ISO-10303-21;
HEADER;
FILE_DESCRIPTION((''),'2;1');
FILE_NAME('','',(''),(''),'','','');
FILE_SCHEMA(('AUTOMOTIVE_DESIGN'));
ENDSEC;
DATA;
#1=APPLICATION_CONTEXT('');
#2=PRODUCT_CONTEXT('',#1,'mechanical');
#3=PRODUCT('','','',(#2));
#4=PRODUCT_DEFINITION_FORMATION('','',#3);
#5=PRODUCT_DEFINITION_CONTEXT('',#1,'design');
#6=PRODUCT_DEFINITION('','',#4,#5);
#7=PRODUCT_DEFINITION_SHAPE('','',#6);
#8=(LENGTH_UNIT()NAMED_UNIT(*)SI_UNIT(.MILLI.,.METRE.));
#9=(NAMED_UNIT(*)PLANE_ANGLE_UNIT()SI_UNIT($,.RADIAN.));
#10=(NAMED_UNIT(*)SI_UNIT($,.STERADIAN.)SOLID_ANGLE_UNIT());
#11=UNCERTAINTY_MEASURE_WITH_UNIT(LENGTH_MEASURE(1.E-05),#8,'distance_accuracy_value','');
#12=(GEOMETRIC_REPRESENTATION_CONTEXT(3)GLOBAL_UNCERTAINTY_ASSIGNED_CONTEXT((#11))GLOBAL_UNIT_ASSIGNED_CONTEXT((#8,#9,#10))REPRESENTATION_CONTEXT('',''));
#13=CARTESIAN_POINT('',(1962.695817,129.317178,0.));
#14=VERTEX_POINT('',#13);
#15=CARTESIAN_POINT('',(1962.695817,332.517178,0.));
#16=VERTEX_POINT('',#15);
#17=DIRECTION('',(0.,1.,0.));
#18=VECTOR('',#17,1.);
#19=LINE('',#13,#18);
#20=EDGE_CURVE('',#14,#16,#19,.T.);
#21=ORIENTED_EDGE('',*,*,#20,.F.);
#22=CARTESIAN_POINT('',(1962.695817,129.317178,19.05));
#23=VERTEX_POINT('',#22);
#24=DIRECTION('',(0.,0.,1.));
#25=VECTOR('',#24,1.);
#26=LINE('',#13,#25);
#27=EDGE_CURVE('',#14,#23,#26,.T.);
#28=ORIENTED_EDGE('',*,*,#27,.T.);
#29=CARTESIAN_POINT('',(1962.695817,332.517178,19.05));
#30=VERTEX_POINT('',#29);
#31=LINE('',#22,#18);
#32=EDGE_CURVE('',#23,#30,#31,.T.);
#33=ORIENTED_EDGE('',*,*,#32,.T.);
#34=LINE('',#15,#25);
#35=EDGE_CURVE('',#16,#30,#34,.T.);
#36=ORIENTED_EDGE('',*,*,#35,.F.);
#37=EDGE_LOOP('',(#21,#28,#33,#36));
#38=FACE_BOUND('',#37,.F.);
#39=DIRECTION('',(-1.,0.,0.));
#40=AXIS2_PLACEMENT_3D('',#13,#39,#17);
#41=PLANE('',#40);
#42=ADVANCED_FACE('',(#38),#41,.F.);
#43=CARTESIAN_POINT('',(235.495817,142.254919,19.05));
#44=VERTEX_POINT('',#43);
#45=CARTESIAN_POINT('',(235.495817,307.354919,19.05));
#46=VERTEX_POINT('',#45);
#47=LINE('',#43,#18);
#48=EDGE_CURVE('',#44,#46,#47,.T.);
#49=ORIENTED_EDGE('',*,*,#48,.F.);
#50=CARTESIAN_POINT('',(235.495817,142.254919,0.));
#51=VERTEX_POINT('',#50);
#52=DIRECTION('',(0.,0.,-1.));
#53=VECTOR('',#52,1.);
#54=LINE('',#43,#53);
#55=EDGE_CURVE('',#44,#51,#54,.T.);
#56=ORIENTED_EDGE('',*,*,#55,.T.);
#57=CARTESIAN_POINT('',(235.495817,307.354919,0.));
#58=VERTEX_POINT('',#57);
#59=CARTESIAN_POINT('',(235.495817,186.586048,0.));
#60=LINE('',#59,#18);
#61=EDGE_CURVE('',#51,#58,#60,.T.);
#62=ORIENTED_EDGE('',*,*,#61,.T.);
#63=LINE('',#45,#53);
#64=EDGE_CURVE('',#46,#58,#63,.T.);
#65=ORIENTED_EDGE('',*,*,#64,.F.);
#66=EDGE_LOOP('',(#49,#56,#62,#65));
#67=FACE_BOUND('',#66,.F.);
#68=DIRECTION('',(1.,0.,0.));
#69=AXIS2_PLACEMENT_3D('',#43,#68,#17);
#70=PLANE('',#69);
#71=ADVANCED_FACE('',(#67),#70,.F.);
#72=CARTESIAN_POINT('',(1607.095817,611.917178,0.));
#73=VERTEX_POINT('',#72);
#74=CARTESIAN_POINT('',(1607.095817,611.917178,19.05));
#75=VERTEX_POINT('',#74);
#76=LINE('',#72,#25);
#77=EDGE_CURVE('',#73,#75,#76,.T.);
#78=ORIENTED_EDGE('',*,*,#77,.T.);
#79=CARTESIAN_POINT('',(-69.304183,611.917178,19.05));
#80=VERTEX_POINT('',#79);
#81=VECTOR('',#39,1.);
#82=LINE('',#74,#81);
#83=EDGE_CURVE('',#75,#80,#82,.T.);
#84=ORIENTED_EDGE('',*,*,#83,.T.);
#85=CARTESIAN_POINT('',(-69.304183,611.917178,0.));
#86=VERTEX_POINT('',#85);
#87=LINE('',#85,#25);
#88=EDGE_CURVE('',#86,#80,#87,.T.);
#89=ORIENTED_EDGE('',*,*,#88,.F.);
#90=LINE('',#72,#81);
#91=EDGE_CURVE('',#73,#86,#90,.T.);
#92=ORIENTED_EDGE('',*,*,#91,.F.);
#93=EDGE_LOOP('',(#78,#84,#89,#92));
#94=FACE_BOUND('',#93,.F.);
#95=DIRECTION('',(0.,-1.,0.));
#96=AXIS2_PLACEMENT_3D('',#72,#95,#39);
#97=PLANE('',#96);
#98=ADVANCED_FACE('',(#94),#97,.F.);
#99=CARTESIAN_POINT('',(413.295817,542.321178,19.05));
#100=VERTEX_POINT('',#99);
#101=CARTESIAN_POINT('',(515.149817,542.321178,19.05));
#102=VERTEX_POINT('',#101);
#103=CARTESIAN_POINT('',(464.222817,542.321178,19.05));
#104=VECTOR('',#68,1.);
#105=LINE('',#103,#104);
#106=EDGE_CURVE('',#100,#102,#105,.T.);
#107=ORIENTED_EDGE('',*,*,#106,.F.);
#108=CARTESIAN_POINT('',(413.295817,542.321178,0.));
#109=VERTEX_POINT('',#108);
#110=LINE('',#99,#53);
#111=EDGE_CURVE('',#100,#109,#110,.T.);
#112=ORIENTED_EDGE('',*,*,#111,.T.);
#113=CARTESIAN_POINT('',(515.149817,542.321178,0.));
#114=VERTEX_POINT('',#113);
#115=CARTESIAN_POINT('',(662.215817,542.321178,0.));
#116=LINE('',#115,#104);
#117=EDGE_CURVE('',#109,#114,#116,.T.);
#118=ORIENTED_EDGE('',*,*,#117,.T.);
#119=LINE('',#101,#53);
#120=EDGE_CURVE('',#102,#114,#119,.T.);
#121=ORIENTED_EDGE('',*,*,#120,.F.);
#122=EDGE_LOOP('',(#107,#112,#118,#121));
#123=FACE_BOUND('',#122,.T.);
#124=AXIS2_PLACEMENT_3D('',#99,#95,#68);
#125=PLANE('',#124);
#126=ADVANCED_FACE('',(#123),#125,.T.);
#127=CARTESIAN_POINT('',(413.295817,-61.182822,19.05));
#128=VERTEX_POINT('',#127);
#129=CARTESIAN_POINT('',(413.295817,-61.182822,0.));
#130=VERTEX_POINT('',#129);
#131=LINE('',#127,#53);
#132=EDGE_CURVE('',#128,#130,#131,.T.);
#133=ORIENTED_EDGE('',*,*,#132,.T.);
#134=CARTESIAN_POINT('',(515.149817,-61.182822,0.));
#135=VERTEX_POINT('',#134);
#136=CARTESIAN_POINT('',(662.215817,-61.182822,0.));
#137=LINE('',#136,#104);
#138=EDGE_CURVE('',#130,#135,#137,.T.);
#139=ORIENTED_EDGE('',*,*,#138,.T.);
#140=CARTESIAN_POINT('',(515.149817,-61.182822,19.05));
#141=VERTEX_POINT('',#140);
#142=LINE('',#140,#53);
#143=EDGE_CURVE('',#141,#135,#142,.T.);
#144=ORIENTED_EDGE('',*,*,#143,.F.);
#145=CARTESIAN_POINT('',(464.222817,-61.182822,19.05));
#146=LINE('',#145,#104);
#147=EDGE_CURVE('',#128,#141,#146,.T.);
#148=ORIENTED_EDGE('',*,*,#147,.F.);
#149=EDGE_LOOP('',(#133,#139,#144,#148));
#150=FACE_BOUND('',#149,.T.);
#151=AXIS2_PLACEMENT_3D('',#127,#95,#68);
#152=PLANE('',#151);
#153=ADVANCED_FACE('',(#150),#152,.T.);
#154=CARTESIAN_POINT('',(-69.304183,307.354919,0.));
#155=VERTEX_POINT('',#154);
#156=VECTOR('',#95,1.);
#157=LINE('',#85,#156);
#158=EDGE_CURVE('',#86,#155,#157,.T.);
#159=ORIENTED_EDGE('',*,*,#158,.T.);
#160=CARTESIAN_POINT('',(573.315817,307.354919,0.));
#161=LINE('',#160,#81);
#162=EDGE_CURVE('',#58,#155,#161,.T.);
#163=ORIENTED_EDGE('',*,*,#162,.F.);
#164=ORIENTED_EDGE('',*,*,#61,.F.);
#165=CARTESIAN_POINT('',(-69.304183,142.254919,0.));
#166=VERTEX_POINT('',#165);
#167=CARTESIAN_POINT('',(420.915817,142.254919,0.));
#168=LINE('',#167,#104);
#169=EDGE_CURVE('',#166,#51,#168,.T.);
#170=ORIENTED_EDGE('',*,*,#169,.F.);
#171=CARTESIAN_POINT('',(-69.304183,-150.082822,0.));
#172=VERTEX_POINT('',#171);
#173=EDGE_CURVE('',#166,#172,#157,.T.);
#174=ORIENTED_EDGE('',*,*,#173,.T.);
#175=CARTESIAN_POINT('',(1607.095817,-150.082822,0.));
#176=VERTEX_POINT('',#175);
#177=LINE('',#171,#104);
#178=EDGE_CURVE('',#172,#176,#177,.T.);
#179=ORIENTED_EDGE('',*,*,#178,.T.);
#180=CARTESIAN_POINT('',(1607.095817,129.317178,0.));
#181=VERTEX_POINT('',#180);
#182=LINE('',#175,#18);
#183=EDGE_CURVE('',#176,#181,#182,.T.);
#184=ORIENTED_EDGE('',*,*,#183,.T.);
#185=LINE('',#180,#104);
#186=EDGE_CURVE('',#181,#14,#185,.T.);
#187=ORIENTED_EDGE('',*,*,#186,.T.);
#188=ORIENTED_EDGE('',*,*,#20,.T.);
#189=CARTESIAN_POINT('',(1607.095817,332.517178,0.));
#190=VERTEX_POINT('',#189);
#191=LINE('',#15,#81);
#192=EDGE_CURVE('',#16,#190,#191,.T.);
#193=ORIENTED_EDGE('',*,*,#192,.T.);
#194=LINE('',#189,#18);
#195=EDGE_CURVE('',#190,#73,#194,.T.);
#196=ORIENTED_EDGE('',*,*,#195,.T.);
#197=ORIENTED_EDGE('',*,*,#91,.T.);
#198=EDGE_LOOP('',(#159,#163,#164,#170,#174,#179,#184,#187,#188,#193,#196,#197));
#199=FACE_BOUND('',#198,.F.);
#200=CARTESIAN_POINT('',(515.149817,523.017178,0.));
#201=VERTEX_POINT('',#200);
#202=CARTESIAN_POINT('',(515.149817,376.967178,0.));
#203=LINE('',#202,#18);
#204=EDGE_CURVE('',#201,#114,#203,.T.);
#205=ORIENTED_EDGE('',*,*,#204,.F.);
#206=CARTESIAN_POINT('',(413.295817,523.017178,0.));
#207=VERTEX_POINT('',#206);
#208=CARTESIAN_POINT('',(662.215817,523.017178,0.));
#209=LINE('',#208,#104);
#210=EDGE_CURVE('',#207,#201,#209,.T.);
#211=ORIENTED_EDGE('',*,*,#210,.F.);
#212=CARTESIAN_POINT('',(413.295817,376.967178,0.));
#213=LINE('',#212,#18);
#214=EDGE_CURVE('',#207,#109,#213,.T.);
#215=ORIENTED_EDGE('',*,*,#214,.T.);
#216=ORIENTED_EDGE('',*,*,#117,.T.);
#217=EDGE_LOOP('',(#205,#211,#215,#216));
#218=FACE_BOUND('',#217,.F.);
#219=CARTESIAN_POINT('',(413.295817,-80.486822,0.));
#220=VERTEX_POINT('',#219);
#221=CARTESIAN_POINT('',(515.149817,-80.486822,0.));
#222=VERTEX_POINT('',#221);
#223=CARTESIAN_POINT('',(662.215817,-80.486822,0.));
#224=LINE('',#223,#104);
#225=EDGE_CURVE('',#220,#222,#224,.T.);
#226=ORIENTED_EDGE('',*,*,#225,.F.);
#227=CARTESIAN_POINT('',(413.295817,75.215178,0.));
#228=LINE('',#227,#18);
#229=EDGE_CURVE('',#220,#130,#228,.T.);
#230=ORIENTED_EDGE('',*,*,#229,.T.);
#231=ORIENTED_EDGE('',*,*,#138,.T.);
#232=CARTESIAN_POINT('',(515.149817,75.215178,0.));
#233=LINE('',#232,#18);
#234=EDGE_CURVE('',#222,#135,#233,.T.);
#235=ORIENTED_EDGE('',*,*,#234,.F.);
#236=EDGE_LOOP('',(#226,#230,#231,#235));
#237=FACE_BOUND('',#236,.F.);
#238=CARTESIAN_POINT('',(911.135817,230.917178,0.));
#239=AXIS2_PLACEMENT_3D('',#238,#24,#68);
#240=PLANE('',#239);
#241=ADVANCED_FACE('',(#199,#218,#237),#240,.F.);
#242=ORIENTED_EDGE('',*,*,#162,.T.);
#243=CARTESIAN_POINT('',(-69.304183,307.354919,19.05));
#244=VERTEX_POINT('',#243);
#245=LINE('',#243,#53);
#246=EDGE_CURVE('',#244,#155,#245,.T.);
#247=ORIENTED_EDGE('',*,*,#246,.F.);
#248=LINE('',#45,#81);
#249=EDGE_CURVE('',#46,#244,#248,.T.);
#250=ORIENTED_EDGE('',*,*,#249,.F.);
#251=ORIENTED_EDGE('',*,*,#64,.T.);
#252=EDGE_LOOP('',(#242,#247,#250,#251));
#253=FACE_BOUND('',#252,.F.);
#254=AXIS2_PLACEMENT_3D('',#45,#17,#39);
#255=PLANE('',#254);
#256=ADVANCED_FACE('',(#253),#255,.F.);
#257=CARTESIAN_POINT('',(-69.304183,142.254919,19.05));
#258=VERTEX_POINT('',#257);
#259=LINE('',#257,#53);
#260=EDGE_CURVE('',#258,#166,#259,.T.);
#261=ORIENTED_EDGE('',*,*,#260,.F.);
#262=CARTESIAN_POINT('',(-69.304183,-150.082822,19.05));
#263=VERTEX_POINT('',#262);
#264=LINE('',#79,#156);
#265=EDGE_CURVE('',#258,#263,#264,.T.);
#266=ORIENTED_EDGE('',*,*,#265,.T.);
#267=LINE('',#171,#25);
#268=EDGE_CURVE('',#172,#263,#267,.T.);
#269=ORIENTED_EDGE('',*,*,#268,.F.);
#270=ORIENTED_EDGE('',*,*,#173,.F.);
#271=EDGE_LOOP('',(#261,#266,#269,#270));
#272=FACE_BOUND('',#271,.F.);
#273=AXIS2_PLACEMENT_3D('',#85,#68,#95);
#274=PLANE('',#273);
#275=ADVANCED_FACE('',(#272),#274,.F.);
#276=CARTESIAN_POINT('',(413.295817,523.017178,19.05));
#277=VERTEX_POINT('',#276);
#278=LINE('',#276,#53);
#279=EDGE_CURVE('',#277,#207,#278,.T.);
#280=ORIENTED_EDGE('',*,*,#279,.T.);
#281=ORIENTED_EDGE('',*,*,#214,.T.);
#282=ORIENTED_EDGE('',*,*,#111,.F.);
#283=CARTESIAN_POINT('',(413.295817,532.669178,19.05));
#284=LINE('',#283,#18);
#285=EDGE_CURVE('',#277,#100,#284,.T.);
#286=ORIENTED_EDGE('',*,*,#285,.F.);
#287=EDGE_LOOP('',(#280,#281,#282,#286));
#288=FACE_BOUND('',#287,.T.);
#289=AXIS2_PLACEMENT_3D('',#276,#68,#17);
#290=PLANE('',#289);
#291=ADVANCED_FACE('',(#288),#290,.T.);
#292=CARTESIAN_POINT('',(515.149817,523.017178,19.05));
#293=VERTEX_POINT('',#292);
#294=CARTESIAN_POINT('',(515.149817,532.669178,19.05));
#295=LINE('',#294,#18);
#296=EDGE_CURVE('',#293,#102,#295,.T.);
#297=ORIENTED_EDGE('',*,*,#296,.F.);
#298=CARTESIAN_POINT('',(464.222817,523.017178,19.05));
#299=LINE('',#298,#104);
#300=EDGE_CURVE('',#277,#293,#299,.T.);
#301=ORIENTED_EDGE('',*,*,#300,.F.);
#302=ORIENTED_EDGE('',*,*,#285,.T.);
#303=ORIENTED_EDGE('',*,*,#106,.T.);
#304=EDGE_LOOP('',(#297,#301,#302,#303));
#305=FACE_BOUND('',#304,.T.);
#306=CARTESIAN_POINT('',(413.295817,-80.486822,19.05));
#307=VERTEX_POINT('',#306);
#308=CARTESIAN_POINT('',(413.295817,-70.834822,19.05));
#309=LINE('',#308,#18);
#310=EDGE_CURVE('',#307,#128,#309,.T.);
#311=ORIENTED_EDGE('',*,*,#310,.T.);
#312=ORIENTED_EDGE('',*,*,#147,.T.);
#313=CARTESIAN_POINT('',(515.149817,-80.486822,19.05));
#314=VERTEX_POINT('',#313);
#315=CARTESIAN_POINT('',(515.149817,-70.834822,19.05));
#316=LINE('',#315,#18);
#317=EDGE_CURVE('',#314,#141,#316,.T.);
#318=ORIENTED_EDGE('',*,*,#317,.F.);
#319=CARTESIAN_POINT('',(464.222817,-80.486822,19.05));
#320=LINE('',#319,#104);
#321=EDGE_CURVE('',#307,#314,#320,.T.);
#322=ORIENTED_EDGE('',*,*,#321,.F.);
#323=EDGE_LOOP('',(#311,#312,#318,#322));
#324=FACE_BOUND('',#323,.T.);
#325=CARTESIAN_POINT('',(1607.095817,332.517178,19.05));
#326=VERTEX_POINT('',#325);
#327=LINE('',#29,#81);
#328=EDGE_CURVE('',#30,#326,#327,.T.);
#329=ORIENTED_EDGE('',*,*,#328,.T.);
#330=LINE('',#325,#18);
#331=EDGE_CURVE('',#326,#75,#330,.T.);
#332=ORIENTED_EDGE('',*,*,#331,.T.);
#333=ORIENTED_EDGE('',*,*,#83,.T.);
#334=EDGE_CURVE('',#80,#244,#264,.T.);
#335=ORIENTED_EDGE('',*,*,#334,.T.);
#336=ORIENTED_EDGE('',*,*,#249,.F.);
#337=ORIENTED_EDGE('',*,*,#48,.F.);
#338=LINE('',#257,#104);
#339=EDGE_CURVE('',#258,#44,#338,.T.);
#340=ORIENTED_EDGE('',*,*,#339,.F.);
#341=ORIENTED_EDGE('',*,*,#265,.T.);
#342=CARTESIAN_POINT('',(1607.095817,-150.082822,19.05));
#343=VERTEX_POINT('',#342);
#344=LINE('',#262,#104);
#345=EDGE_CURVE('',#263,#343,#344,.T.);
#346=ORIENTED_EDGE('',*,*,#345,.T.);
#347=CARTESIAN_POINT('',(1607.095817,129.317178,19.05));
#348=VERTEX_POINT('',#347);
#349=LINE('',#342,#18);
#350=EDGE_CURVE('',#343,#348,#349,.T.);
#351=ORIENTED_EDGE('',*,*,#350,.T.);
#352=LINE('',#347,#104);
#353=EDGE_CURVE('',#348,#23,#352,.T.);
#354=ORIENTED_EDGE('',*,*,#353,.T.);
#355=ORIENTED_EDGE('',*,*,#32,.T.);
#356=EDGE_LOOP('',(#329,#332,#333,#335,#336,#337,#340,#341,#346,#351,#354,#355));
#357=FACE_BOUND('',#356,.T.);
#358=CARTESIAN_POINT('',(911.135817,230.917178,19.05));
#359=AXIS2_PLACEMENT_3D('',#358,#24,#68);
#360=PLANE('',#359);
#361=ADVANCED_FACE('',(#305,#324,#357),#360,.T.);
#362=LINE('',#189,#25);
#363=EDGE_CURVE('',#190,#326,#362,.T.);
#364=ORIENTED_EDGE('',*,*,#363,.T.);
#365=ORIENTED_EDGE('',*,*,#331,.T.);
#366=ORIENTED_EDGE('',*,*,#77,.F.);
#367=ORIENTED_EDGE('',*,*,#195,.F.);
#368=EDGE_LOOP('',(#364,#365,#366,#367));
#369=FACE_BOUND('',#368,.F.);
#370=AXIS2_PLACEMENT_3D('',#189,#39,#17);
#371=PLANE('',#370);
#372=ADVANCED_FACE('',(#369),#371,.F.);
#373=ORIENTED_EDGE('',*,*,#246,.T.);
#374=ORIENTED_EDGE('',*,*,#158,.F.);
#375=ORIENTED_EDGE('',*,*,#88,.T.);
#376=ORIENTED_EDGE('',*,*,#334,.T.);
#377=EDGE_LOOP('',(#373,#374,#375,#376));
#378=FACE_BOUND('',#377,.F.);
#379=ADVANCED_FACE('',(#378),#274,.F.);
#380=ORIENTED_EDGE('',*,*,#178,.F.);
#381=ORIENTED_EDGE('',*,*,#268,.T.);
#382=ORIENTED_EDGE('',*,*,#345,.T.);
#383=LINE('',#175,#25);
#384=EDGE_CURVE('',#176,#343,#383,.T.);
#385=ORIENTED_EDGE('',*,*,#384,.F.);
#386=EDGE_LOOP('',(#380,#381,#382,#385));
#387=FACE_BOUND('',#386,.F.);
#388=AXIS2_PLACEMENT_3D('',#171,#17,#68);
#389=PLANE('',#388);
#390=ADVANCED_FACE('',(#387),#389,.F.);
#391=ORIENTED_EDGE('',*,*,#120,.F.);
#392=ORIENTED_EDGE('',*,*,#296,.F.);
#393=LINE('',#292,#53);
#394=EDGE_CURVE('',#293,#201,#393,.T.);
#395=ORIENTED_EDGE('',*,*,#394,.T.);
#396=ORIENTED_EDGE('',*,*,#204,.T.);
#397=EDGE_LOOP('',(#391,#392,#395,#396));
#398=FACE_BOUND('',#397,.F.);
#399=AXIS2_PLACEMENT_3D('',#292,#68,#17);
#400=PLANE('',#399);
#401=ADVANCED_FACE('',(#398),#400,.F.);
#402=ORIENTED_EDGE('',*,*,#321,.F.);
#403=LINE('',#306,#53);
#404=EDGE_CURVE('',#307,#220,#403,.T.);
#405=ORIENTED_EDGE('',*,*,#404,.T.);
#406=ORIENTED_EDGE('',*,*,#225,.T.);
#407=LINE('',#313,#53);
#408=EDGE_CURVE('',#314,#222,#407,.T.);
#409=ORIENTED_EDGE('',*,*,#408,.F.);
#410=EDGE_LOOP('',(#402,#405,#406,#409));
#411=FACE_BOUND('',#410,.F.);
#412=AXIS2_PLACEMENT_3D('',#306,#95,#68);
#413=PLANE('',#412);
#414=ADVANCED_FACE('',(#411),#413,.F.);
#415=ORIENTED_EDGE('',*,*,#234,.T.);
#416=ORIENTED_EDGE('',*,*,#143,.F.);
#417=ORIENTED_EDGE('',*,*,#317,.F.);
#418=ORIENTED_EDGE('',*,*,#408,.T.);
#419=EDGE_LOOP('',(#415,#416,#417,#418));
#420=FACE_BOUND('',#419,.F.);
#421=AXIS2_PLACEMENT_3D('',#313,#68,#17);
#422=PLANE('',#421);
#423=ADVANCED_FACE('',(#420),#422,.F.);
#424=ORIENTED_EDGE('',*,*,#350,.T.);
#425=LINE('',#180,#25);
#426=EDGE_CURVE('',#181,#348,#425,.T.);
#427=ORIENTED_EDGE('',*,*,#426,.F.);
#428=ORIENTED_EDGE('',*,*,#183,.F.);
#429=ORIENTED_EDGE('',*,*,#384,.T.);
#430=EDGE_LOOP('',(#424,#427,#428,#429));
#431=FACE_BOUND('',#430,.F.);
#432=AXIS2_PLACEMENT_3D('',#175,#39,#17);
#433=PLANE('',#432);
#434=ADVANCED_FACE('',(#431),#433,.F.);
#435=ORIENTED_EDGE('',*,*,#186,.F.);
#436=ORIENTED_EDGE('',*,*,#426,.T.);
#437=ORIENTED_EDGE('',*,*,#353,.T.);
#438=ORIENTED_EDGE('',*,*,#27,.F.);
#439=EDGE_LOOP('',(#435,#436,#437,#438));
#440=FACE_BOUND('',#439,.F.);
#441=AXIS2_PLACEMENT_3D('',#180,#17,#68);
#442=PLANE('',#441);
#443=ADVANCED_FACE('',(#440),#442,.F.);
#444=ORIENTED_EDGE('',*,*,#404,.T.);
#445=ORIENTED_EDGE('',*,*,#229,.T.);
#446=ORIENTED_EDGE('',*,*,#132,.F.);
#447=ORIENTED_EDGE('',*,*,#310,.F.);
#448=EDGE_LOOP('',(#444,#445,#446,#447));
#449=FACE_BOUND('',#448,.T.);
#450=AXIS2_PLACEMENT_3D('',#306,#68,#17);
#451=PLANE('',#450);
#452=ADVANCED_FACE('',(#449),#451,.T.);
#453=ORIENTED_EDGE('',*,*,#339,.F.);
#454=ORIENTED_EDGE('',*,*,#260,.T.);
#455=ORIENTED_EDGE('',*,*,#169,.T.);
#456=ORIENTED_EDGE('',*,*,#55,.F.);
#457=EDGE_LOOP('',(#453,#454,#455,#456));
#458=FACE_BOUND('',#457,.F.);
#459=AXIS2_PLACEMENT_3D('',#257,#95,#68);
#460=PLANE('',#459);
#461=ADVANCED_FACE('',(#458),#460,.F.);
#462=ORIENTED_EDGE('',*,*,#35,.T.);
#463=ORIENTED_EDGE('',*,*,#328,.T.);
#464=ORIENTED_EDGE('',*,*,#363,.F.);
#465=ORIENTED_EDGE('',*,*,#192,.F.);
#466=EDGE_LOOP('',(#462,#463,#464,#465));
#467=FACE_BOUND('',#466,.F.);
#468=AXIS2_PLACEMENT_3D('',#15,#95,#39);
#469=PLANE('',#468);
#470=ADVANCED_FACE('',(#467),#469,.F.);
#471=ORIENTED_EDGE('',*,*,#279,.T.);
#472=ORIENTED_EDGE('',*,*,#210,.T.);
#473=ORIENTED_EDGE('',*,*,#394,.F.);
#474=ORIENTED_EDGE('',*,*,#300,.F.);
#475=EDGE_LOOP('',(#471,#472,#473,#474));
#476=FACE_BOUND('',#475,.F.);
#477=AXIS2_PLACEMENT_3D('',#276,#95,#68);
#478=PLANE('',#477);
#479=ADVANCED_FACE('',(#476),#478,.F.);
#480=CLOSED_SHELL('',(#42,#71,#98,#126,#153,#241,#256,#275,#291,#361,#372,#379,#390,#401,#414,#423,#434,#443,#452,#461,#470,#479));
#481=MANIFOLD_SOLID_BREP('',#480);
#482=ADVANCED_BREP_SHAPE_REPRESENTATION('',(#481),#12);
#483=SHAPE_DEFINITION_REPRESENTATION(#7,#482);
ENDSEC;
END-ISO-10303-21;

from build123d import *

# Parameters (mm, degrees)
F1_DEPTH = 19.05
F2_W     = 101.854
F2_H     = 19.304
F3_DEPTH = 25.4


# Not quite as in the source:
# - a feature names something its author has since deleted; it is built from what else it names


with BuildPart() as f1:
    # F0 (on Top) → F1 (new body)
    with BuildSketch(Plane.XY):
        Polygon((-69.3041831255, 0), (-69.3041831255, -150.0828219056), (1607.0958168745, -150.0828219056), (1607.0958168745, 129.3171780944), (1962.6958168745, 129.3171780944), (1962.6958168745, 332.5171780944), (1607.0958168745, 332.5171780944), (1607.0958168745, 611.9171780944), (-69.3041831255, 611.9171780944), align=None)
    extrude(amount=F1_DEPTH)

    # F2 (on face) → F3 (cut)
    with BuildSketch(Plane.XY.offset(19.05)):
        with Locations((464.2228168745, 532.6691780944)):
            Rectangle(F2_W, F2_H)
        with Locations((464.2228168745, -70.8348219056)):
            Rectangle(F2_W, F2_H)
        Polygon((-69.3041831255, 307.3549188137), (-69.3041831255, 224.8049188137), (-69.3041831255, 142.2549188137), (235.4958168745, 142.2549188137), (235.4958168745, 307.3549188137), align=None)
    extrude(amount=-F3_DEPTH, mode=Mode.SUBTRACT)


solid = f1.part
